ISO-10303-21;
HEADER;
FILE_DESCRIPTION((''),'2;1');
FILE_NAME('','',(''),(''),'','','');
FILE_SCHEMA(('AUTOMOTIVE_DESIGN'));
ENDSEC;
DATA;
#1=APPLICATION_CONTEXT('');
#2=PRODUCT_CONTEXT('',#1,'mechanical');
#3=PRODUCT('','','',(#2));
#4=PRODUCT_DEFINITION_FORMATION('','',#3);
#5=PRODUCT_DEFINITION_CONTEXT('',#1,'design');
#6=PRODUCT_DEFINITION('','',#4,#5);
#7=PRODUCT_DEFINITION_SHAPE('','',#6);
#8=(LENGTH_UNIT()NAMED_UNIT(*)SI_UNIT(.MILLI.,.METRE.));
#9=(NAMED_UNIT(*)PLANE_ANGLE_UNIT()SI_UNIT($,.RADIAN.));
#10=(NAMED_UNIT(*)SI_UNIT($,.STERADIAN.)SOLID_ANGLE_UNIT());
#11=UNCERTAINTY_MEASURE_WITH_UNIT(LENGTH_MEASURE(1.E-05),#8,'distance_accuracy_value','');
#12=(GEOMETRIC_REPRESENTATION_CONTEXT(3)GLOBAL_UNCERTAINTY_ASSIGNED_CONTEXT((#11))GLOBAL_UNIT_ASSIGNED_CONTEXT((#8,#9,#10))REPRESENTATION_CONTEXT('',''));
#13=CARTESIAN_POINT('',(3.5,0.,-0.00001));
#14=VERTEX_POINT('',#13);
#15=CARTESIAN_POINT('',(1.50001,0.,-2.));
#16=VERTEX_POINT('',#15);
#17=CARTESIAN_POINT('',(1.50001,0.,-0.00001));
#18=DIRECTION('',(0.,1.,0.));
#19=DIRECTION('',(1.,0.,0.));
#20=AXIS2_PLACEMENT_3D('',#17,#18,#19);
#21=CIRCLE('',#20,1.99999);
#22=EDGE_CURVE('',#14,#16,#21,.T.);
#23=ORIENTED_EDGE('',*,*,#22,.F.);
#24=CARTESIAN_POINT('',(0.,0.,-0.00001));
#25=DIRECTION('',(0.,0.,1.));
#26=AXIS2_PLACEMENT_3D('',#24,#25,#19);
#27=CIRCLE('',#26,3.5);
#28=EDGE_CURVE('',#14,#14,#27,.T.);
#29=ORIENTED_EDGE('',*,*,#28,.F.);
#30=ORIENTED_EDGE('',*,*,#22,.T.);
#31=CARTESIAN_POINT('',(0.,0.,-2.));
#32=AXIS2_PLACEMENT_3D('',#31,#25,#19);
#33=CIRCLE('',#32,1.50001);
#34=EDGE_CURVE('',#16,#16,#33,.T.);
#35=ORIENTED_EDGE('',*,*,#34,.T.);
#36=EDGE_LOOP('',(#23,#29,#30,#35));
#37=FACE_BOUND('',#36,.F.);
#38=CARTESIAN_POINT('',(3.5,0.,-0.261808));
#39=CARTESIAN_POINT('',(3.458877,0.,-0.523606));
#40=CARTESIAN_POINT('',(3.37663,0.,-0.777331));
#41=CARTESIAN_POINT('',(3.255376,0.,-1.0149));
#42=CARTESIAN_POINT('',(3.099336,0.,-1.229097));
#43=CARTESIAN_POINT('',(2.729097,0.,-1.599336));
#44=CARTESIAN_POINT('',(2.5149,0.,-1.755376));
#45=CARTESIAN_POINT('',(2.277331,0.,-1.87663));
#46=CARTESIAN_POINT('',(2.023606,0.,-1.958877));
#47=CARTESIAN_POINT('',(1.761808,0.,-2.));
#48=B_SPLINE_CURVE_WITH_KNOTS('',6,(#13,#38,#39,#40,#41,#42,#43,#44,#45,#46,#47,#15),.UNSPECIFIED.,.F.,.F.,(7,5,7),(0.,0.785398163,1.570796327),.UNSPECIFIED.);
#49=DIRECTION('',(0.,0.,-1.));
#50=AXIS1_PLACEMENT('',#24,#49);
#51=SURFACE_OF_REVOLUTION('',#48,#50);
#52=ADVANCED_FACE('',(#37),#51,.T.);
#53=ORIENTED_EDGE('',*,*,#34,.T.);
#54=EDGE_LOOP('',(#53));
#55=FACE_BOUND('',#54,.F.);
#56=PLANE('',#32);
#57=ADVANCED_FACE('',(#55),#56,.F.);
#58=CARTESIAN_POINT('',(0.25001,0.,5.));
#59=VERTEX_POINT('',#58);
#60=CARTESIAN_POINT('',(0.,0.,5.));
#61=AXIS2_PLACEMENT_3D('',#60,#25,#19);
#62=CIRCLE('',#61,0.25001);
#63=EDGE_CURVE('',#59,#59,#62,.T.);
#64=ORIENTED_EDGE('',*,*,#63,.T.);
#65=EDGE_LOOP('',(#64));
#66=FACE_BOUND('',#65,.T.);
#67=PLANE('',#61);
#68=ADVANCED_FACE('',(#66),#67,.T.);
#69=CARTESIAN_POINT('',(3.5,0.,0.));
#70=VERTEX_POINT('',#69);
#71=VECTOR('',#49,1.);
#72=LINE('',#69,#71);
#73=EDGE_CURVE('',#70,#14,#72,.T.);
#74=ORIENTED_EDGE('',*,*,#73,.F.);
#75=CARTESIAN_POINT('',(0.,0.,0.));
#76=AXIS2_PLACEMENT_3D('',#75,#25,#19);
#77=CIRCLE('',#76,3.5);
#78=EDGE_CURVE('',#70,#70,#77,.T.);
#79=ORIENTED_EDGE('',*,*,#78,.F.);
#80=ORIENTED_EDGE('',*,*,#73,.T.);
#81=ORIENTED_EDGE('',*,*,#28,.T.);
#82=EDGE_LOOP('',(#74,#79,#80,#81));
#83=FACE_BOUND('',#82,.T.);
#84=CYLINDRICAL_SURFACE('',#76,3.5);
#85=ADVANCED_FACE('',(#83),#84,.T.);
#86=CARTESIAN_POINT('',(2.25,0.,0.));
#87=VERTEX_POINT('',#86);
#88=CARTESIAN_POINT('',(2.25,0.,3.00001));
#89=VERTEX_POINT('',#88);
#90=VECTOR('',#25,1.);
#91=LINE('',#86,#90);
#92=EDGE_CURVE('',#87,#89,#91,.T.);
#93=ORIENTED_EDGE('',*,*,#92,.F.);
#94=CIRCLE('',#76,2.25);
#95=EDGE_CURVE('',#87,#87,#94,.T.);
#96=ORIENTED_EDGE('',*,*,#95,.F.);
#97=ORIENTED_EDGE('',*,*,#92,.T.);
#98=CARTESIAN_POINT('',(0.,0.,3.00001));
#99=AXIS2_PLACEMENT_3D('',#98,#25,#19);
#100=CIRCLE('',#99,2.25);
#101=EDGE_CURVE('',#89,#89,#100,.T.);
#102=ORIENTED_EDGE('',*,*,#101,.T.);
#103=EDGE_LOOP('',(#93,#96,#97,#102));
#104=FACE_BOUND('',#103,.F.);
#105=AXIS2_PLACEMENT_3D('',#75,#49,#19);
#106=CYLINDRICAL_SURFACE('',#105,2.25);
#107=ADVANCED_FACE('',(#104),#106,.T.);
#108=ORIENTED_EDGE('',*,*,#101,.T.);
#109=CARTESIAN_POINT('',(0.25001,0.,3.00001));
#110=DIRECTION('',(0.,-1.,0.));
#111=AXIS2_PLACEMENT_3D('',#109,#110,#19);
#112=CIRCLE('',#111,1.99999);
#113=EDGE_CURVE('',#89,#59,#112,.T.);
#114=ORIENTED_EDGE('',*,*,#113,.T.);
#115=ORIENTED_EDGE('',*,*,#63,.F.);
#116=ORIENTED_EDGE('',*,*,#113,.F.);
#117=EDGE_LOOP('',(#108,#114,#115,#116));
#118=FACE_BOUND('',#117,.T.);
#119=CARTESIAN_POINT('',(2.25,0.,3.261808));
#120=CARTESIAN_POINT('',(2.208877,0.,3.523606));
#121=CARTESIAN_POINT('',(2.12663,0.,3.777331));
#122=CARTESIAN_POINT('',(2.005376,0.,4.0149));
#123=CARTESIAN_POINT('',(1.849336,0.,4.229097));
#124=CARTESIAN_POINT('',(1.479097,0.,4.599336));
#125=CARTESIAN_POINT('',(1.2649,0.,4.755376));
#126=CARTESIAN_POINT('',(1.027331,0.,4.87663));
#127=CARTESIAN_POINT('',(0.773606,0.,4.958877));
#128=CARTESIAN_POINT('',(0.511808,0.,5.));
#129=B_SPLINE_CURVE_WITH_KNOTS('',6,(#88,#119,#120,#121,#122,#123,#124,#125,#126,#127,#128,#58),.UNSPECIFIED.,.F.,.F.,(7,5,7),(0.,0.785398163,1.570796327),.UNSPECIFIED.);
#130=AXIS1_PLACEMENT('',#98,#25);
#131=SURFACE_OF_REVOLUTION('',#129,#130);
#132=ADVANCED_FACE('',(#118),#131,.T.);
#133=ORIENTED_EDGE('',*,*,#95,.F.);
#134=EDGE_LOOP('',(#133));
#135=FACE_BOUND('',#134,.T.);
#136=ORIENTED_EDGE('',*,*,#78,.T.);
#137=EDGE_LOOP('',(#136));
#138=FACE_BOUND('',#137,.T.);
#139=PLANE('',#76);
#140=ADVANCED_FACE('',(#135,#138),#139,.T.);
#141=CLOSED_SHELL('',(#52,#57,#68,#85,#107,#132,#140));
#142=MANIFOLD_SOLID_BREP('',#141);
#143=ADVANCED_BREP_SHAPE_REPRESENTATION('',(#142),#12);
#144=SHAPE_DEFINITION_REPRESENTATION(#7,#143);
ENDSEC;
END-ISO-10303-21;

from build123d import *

# Parameters (mm, degrees)
F0_R     = 3.5
F0_R_2   = 2.25
F1_DEPTH = 2
F2_DEPTH = 5
F3_R     = 1.99999


# Not quite as in the source:
# - a fillet or chamfer is up to 0.001 mm smaller than in the source, because OpenCascade refuses the exact size


with BuildPart() as f1:
    # F0 (on Top) → F1 (new body)
    with BuildSketch(Plane.XY):
        Circle(F0_R)
        Circle(F0_R_2, mode=Mode.SUBTRACT)
        Circle(F0_R_2)
    extrude(amount=-F1_DEPTH)

    # F0 (on Top) → F2 (join)
    with BuildSketch(Plane.XY):
        Circle(F0_R_2)
    extrude(amount=F2_DEPTH)

    # F3 (radius 2 in the source; OpenCascade refuses exactly that, so slightly less here)
    f3_edges = [f1.edges().sort_by_distance(p)[0] for p in [
        (-2.25, 0, 5),
        (-3.5, 0, -2),
    ]]
    fillet(f3_edges, radius=F3_R)


solid = f1.part
